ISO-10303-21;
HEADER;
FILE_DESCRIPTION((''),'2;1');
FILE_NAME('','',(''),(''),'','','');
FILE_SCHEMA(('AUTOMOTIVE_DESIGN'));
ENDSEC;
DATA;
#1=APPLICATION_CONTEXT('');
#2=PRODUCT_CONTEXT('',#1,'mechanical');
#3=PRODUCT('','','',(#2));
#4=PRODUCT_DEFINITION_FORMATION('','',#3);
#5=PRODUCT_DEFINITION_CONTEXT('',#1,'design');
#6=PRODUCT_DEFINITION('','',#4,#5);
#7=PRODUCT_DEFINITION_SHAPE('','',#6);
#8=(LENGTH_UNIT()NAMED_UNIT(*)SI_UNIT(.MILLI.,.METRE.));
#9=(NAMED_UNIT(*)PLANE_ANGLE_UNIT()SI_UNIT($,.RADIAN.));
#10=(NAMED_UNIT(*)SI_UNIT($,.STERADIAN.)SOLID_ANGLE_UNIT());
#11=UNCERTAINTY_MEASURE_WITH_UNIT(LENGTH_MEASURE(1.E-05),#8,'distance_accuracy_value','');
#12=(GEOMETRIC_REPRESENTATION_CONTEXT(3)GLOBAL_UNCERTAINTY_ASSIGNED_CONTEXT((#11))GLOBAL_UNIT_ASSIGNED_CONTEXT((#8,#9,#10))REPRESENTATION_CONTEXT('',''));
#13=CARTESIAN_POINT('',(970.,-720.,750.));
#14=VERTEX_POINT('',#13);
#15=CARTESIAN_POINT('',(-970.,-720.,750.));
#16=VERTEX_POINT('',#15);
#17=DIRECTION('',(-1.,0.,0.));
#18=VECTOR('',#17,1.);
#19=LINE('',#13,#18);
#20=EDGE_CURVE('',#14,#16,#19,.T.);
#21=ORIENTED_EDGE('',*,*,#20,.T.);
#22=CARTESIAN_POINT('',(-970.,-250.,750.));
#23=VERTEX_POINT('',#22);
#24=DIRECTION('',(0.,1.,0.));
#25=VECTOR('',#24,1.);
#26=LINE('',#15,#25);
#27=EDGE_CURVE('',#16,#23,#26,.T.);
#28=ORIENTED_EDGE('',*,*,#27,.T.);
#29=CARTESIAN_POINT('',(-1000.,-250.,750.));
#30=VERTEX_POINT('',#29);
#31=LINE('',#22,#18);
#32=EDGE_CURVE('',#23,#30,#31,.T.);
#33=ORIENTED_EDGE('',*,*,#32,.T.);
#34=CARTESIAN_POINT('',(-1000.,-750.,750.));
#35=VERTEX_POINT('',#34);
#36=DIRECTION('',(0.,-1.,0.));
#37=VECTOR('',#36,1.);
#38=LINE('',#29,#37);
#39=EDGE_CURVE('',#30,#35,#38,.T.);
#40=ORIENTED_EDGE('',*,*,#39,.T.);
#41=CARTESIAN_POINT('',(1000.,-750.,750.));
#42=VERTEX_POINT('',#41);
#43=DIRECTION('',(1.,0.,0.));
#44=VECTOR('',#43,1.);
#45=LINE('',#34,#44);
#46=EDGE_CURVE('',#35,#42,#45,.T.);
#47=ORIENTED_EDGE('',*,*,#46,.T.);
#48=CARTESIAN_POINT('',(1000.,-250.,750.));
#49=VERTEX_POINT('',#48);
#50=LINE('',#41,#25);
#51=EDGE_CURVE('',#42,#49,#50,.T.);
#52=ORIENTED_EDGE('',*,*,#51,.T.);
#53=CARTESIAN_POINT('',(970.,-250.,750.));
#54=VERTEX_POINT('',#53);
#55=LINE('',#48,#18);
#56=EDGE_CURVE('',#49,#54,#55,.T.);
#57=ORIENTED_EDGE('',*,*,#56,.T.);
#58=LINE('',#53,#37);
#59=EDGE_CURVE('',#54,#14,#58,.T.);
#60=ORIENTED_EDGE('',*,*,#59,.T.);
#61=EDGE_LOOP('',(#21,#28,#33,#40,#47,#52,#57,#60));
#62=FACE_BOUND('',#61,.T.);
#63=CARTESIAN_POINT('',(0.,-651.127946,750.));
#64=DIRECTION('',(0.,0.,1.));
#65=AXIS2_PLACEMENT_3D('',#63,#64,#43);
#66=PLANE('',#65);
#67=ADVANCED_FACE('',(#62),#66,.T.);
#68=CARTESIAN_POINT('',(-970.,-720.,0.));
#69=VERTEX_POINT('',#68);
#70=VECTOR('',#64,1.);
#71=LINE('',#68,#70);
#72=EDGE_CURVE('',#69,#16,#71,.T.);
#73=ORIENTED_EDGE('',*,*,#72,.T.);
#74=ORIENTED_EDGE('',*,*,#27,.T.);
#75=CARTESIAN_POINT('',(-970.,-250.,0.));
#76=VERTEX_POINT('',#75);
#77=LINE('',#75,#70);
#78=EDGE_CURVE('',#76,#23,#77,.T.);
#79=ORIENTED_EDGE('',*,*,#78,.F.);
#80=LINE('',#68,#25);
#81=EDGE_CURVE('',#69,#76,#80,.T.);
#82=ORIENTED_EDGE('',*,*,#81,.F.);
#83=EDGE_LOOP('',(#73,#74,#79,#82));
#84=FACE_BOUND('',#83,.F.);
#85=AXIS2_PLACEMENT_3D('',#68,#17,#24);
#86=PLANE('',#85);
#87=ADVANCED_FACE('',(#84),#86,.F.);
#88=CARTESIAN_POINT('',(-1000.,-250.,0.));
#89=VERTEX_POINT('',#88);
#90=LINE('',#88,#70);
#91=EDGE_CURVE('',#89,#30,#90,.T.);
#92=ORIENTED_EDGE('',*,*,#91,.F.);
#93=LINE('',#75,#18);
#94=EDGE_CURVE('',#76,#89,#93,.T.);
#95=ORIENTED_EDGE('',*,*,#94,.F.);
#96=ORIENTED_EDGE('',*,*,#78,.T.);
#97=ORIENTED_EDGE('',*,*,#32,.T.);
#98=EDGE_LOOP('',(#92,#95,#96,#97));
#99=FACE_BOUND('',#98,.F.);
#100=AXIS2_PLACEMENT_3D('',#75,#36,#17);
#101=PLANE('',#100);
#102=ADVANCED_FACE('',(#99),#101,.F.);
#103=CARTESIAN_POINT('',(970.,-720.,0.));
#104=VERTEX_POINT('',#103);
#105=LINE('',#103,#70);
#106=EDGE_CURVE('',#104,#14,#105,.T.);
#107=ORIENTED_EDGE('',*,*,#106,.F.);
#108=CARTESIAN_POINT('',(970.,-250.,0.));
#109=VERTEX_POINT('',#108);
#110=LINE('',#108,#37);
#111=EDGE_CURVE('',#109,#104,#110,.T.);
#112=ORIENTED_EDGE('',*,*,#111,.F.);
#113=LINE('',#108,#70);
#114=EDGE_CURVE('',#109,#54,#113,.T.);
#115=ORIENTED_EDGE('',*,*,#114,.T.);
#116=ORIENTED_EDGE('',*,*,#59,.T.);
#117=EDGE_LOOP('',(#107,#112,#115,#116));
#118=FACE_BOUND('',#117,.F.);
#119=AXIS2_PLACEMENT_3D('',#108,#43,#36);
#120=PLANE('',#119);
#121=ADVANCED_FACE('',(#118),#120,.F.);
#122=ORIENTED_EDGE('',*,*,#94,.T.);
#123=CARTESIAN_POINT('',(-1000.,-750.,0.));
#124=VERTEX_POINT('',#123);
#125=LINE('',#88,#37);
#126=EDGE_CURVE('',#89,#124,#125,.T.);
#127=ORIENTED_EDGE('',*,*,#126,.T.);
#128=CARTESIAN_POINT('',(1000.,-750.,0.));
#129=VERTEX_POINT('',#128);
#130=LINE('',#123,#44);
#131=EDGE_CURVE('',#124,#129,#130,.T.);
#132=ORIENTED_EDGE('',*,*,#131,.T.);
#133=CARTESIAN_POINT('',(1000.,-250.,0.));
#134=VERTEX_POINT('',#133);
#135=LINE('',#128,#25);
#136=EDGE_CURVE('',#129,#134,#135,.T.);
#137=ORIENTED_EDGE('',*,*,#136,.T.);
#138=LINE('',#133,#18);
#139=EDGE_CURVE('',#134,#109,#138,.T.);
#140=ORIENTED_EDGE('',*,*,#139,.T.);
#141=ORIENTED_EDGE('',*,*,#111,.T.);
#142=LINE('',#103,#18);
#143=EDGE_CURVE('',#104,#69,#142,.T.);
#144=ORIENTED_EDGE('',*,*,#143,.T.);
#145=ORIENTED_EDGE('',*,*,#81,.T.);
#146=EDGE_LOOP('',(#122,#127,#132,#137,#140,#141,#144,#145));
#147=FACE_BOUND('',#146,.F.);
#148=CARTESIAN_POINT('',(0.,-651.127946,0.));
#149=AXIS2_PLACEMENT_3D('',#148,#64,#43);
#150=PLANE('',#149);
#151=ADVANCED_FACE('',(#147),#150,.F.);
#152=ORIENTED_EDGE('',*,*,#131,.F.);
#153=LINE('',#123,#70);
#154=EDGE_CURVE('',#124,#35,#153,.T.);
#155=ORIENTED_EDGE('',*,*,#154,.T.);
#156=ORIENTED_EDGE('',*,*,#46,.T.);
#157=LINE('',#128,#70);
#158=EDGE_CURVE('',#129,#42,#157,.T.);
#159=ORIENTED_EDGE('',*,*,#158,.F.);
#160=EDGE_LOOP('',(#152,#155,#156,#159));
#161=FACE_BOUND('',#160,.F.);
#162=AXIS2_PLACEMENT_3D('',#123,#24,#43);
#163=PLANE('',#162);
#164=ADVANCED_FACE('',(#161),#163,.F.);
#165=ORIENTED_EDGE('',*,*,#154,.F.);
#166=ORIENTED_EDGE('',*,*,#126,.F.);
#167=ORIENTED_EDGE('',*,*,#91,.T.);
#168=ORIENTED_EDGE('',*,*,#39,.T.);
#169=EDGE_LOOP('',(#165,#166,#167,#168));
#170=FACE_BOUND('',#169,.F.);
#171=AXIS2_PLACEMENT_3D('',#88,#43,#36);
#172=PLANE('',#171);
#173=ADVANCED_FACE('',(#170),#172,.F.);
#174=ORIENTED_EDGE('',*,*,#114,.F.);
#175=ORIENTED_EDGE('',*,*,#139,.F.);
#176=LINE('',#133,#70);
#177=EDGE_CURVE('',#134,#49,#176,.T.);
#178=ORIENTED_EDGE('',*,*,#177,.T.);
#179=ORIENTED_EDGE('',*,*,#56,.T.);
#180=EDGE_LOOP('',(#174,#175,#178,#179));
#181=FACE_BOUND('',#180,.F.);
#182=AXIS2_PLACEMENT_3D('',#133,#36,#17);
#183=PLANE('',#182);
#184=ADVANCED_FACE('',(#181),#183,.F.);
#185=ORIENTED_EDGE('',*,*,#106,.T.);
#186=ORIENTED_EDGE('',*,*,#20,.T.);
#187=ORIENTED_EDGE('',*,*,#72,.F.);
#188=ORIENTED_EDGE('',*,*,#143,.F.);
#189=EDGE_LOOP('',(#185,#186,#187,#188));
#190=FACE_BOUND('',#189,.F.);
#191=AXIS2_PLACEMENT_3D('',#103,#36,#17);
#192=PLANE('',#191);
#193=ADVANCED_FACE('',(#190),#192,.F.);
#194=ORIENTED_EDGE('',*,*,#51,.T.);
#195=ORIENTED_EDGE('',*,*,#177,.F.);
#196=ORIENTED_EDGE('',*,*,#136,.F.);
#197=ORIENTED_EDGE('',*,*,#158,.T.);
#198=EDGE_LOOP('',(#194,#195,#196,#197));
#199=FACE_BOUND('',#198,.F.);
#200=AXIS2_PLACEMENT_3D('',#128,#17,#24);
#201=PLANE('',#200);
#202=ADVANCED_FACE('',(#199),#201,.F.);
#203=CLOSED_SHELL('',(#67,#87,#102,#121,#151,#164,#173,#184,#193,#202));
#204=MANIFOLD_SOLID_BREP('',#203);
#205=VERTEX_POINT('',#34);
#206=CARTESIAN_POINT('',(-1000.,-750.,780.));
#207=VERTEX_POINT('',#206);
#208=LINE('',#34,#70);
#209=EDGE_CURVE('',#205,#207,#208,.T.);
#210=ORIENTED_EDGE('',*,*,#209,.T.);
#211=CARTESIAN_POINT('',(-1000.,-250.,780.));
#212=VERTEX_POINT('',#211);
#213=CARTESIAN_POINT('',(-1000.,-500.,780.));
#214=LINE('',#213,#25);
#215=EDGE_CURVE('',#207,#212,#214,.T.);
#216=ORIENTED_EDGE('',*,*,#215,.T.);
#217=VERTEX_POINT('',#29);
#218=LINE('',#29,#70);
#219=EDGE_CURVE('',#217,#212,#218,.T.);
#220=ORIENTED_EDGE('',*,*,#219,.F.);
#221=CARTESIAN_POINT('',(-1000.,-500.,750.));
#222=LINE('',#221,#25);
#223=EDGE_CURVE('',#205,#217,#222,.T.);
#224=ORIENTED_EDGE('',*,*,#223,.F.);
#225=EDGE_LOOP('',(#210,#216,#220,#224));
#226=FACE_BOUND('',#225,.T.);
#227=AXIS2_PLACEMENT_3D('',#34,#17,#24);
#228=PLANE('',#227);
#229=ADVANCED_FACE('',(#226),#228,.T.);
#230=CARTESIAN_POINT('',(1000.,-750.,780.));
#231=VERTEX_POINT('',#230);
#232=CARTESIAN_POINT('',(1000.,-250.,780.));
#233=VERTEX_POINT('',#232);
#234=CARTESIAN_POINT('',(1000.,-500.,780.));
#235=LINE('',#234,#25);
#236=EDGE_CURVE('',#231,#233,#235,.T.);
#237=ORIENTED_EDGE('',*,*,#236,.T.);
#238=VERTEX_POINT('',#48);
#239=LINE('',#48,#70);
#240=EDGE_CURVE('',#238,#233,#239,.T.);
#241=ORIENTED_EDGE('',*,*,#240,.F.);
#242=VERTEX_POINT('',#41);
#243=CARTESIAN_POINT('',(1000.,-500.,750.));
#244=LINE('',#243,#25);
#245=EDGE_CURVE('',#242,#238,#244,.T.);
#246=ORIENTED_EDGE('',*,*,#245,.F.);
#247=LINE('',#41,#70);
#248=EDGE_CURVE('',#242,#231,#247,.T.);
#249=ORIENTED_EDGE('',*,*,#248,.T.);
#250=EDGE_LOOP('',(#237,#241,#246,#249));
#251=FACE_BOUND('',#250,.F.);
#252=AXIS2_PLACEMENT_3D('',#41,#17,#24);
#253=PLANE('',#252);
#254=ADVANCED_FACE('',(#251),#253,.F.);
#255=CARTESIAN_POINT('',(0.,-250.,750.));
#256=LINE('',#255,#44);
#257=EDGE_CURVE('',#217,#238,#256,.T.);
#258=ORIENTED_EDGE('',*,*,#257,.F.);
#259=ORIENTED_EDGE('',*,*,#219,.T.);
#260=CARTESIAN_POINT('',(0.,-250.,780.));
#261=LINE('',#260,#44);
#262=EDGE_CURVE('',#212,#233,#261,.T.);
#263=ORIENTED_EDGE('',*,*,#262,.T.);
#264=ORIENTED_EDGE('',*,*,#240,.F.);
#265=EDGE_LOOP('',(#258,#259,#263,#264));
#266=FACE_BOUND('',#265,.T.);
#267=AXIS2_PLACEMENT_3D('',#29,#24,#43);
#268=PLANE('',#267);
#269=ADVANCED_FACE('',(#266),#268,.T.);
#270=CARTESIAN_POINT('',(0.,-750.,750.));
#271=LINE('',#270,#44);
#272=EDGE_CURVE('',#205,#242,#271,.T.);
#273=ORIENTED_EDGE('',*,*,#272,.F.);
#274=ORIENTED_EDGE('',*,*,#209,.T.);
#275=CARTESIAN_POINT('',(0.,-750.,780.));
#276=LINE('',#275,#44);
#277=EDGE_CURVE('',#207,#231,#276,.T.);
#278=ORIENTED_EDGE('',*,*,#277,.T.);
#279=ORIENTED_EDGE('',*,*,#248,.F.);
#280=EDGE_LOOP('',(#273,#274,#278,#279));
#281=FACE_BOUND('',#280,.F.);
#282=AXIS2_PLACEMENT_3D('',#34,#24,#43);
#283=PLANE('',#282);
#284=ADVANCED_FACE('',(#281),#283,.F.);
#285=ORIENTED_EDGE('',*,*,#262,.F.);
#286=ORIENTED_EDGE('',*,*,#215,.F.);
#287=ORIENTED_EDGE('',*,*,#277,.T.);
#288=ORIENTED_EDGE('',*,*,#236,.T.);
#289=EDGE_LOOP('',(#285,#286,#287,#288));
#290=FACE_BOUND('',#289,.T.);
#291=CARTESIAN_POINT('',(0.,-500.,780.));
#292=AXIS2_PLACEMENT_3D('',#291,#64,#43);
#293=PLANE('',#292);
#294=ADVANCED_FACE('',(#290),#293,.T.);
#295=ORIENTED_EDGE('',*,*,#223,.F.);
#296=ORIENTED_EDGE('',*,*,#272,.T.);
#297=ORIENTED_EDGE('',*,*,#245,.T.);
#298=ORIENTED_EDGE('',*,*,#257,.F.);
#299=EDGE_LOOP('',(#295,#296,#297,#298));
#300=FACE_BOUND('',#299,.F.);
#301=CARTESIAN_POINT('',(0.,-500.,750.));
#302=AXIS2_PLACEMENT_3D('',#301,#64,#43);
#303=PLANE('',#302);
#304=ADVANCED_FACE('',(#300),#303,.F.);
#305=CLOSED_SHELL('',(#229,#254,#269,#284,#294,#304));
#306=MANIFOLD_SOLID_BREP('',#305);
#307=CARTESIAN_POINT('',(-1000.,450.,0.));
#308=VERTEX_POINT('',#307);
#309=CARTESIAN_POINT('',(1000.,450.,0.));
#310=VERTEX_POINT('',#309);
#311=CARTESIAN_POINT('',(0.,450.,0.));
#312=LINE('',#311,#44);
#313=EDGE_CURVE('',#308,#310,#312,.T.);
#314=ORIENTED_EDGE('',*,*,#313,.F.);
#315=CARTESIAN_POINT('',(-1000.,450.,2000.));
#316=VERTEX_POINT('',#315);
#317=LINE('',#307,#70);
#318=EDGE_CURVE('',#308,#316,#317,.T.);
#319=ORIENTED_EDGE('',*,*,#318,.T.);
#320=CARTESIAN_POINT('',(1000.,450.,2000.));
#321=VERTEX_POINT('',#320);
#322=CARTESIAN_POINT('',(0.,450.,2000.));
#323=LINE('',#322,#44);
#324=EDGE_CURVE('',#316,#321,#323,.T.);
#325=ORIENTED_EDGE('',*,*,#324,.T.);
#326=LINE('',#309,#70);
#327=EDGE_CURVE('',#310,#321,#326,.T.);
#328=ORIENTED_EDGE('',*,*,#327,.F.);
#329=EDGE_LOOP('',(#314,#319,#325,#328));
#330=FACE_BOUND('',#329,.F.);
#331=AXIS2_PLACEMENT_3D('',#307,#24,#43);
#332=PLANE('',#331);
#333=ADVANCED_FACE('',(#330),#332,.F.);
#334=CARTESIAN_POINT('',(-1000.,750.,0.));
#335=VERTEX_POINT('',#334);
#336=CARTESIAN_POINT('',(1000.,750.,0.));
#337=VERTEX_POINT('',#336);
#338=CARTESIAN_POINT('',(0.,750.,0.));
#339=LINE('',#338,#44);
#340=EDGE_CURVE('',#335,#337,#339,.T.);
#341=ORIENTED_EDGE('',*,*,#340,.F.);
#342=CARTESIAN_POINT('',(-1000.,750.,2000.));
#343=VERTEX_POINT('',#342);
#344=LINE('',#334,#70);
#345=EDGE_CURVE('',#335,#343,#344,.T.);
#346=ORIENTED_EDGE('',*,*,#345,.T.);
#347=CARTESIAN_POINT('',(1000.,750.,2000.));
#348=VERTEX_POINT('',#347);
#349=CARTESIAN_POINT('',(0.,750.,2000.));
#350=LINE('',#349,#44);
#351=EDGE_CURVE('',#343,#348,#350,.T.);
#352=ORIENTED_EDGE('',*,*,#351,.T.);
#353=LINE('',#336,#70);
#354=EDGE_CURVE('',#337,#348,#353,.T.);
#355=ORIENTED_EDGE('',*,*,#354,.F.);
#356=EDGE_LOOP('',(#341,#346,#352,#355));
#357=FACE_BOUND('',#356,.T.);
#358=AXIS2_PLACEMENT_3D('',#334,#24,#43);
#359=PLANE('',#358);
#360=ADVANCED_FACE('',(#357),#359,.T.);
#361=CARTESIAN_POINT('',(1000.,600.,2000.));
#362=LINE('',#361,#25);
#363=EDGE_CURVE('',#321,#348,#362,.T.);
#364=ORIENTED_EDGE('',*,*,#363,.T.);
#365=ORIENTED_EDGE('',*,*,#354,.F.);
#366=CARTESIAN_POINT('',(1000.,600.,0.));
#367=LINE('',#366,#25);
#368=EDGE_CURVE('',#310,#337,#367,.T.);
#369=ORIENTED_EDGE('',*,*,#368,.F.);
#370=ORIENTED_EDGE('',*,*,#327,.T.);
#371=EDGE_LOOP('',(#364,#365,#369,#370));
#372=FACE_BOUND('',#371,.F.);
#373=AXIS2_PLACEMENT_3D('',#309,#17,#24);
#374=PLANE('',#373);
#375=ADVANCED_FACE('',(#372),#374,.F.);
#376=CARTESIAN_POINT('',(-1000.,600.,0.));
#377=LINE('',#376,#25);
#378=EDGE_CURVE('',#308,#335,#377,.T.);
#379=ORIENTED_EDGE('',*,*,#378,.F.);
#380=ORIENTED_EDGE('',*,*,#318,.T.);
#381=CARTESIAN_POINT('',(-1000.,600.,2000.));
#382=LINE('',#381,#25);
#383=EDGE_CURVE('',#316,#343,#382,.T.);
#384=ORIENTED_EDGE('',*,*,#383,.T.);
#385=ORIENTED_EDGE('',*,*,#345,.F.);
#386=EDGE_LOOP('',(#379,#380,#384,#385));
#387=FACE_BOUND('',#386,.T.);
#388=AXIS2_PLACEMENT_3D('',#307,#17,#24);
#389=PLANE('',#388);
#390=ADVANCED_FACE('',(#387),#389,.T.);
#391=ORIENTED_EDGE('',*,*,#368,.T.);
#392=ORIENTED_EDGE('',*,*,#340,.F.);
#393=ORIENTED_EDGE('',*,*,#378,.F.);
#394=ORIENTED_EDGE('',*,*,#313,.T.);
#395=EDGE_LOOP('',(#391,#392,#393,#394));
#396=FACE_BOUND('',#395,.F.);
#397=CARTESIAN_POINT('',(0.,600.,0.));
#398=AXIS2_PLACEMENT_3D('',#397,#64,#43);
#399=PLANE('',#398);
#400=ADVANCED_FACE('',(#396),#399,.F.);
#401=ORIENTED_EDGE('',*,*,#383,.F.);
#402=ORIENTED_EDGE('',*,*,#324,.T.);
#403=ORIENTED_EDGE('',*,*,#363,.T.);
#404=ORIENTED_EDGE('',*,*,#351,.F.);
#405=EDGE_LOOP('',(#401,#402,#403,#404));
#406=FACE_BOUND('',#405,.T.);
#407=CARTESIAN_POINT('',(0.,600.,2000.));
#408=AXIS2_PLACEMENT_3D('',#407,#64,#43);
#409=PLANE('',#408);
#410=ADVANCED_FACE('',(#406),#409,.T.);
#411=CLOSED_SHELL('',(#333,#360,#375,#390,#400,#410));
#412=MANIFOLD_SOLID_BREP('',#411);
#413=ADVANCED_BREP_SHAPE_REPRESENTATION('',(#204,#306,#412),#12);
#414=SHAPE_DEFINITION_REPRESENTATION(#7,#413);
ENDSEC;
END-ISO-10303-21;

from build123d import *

# Parameters (mm, degrees)
F1_W     = 2000
F1_H     = 300
F2_DEPTH = 2000
F4_DEPTH = 750
F5_W     = 2000
F5_H     = 500
F6_DEPTH = 30


with BuildPart() as f2:
    # F1 (on Top) → F2 (new body)
    with BuildSketch(Plane.XY):
        with Locations((0, 600)):
            Rectangle(F1_W, F1_H)
    extrude(amount=F2_DEPTH)


with BuildPart() as f4:
    # F3 (on Top) → F4 (new body)
    with BuildSketch(Plane.XY):
        Polygon((1000, -750), (1000, -250), (970, -250), (970, -720), (-970, -720), (-970, -250), (-1000, -250), (-1000, -750), align=None)
    extrude(amount=F4_DEPTH)


with BuildPart() as f6:
    # F5 (on face) → F6 (new body)
    with BuildSketch(Plane.XY.offset(750)):
        with Locations((0, -500)):
            Rectangle(F5_W, F5_H)
    extrude(amount=F6_DEPTH)


with BuildPart() as f7_1:
    # F7: instance of F2
    add(f2.part.mirror(Plane.YZ))


solid = Compound([f2.part, f4.part, f6.part])
